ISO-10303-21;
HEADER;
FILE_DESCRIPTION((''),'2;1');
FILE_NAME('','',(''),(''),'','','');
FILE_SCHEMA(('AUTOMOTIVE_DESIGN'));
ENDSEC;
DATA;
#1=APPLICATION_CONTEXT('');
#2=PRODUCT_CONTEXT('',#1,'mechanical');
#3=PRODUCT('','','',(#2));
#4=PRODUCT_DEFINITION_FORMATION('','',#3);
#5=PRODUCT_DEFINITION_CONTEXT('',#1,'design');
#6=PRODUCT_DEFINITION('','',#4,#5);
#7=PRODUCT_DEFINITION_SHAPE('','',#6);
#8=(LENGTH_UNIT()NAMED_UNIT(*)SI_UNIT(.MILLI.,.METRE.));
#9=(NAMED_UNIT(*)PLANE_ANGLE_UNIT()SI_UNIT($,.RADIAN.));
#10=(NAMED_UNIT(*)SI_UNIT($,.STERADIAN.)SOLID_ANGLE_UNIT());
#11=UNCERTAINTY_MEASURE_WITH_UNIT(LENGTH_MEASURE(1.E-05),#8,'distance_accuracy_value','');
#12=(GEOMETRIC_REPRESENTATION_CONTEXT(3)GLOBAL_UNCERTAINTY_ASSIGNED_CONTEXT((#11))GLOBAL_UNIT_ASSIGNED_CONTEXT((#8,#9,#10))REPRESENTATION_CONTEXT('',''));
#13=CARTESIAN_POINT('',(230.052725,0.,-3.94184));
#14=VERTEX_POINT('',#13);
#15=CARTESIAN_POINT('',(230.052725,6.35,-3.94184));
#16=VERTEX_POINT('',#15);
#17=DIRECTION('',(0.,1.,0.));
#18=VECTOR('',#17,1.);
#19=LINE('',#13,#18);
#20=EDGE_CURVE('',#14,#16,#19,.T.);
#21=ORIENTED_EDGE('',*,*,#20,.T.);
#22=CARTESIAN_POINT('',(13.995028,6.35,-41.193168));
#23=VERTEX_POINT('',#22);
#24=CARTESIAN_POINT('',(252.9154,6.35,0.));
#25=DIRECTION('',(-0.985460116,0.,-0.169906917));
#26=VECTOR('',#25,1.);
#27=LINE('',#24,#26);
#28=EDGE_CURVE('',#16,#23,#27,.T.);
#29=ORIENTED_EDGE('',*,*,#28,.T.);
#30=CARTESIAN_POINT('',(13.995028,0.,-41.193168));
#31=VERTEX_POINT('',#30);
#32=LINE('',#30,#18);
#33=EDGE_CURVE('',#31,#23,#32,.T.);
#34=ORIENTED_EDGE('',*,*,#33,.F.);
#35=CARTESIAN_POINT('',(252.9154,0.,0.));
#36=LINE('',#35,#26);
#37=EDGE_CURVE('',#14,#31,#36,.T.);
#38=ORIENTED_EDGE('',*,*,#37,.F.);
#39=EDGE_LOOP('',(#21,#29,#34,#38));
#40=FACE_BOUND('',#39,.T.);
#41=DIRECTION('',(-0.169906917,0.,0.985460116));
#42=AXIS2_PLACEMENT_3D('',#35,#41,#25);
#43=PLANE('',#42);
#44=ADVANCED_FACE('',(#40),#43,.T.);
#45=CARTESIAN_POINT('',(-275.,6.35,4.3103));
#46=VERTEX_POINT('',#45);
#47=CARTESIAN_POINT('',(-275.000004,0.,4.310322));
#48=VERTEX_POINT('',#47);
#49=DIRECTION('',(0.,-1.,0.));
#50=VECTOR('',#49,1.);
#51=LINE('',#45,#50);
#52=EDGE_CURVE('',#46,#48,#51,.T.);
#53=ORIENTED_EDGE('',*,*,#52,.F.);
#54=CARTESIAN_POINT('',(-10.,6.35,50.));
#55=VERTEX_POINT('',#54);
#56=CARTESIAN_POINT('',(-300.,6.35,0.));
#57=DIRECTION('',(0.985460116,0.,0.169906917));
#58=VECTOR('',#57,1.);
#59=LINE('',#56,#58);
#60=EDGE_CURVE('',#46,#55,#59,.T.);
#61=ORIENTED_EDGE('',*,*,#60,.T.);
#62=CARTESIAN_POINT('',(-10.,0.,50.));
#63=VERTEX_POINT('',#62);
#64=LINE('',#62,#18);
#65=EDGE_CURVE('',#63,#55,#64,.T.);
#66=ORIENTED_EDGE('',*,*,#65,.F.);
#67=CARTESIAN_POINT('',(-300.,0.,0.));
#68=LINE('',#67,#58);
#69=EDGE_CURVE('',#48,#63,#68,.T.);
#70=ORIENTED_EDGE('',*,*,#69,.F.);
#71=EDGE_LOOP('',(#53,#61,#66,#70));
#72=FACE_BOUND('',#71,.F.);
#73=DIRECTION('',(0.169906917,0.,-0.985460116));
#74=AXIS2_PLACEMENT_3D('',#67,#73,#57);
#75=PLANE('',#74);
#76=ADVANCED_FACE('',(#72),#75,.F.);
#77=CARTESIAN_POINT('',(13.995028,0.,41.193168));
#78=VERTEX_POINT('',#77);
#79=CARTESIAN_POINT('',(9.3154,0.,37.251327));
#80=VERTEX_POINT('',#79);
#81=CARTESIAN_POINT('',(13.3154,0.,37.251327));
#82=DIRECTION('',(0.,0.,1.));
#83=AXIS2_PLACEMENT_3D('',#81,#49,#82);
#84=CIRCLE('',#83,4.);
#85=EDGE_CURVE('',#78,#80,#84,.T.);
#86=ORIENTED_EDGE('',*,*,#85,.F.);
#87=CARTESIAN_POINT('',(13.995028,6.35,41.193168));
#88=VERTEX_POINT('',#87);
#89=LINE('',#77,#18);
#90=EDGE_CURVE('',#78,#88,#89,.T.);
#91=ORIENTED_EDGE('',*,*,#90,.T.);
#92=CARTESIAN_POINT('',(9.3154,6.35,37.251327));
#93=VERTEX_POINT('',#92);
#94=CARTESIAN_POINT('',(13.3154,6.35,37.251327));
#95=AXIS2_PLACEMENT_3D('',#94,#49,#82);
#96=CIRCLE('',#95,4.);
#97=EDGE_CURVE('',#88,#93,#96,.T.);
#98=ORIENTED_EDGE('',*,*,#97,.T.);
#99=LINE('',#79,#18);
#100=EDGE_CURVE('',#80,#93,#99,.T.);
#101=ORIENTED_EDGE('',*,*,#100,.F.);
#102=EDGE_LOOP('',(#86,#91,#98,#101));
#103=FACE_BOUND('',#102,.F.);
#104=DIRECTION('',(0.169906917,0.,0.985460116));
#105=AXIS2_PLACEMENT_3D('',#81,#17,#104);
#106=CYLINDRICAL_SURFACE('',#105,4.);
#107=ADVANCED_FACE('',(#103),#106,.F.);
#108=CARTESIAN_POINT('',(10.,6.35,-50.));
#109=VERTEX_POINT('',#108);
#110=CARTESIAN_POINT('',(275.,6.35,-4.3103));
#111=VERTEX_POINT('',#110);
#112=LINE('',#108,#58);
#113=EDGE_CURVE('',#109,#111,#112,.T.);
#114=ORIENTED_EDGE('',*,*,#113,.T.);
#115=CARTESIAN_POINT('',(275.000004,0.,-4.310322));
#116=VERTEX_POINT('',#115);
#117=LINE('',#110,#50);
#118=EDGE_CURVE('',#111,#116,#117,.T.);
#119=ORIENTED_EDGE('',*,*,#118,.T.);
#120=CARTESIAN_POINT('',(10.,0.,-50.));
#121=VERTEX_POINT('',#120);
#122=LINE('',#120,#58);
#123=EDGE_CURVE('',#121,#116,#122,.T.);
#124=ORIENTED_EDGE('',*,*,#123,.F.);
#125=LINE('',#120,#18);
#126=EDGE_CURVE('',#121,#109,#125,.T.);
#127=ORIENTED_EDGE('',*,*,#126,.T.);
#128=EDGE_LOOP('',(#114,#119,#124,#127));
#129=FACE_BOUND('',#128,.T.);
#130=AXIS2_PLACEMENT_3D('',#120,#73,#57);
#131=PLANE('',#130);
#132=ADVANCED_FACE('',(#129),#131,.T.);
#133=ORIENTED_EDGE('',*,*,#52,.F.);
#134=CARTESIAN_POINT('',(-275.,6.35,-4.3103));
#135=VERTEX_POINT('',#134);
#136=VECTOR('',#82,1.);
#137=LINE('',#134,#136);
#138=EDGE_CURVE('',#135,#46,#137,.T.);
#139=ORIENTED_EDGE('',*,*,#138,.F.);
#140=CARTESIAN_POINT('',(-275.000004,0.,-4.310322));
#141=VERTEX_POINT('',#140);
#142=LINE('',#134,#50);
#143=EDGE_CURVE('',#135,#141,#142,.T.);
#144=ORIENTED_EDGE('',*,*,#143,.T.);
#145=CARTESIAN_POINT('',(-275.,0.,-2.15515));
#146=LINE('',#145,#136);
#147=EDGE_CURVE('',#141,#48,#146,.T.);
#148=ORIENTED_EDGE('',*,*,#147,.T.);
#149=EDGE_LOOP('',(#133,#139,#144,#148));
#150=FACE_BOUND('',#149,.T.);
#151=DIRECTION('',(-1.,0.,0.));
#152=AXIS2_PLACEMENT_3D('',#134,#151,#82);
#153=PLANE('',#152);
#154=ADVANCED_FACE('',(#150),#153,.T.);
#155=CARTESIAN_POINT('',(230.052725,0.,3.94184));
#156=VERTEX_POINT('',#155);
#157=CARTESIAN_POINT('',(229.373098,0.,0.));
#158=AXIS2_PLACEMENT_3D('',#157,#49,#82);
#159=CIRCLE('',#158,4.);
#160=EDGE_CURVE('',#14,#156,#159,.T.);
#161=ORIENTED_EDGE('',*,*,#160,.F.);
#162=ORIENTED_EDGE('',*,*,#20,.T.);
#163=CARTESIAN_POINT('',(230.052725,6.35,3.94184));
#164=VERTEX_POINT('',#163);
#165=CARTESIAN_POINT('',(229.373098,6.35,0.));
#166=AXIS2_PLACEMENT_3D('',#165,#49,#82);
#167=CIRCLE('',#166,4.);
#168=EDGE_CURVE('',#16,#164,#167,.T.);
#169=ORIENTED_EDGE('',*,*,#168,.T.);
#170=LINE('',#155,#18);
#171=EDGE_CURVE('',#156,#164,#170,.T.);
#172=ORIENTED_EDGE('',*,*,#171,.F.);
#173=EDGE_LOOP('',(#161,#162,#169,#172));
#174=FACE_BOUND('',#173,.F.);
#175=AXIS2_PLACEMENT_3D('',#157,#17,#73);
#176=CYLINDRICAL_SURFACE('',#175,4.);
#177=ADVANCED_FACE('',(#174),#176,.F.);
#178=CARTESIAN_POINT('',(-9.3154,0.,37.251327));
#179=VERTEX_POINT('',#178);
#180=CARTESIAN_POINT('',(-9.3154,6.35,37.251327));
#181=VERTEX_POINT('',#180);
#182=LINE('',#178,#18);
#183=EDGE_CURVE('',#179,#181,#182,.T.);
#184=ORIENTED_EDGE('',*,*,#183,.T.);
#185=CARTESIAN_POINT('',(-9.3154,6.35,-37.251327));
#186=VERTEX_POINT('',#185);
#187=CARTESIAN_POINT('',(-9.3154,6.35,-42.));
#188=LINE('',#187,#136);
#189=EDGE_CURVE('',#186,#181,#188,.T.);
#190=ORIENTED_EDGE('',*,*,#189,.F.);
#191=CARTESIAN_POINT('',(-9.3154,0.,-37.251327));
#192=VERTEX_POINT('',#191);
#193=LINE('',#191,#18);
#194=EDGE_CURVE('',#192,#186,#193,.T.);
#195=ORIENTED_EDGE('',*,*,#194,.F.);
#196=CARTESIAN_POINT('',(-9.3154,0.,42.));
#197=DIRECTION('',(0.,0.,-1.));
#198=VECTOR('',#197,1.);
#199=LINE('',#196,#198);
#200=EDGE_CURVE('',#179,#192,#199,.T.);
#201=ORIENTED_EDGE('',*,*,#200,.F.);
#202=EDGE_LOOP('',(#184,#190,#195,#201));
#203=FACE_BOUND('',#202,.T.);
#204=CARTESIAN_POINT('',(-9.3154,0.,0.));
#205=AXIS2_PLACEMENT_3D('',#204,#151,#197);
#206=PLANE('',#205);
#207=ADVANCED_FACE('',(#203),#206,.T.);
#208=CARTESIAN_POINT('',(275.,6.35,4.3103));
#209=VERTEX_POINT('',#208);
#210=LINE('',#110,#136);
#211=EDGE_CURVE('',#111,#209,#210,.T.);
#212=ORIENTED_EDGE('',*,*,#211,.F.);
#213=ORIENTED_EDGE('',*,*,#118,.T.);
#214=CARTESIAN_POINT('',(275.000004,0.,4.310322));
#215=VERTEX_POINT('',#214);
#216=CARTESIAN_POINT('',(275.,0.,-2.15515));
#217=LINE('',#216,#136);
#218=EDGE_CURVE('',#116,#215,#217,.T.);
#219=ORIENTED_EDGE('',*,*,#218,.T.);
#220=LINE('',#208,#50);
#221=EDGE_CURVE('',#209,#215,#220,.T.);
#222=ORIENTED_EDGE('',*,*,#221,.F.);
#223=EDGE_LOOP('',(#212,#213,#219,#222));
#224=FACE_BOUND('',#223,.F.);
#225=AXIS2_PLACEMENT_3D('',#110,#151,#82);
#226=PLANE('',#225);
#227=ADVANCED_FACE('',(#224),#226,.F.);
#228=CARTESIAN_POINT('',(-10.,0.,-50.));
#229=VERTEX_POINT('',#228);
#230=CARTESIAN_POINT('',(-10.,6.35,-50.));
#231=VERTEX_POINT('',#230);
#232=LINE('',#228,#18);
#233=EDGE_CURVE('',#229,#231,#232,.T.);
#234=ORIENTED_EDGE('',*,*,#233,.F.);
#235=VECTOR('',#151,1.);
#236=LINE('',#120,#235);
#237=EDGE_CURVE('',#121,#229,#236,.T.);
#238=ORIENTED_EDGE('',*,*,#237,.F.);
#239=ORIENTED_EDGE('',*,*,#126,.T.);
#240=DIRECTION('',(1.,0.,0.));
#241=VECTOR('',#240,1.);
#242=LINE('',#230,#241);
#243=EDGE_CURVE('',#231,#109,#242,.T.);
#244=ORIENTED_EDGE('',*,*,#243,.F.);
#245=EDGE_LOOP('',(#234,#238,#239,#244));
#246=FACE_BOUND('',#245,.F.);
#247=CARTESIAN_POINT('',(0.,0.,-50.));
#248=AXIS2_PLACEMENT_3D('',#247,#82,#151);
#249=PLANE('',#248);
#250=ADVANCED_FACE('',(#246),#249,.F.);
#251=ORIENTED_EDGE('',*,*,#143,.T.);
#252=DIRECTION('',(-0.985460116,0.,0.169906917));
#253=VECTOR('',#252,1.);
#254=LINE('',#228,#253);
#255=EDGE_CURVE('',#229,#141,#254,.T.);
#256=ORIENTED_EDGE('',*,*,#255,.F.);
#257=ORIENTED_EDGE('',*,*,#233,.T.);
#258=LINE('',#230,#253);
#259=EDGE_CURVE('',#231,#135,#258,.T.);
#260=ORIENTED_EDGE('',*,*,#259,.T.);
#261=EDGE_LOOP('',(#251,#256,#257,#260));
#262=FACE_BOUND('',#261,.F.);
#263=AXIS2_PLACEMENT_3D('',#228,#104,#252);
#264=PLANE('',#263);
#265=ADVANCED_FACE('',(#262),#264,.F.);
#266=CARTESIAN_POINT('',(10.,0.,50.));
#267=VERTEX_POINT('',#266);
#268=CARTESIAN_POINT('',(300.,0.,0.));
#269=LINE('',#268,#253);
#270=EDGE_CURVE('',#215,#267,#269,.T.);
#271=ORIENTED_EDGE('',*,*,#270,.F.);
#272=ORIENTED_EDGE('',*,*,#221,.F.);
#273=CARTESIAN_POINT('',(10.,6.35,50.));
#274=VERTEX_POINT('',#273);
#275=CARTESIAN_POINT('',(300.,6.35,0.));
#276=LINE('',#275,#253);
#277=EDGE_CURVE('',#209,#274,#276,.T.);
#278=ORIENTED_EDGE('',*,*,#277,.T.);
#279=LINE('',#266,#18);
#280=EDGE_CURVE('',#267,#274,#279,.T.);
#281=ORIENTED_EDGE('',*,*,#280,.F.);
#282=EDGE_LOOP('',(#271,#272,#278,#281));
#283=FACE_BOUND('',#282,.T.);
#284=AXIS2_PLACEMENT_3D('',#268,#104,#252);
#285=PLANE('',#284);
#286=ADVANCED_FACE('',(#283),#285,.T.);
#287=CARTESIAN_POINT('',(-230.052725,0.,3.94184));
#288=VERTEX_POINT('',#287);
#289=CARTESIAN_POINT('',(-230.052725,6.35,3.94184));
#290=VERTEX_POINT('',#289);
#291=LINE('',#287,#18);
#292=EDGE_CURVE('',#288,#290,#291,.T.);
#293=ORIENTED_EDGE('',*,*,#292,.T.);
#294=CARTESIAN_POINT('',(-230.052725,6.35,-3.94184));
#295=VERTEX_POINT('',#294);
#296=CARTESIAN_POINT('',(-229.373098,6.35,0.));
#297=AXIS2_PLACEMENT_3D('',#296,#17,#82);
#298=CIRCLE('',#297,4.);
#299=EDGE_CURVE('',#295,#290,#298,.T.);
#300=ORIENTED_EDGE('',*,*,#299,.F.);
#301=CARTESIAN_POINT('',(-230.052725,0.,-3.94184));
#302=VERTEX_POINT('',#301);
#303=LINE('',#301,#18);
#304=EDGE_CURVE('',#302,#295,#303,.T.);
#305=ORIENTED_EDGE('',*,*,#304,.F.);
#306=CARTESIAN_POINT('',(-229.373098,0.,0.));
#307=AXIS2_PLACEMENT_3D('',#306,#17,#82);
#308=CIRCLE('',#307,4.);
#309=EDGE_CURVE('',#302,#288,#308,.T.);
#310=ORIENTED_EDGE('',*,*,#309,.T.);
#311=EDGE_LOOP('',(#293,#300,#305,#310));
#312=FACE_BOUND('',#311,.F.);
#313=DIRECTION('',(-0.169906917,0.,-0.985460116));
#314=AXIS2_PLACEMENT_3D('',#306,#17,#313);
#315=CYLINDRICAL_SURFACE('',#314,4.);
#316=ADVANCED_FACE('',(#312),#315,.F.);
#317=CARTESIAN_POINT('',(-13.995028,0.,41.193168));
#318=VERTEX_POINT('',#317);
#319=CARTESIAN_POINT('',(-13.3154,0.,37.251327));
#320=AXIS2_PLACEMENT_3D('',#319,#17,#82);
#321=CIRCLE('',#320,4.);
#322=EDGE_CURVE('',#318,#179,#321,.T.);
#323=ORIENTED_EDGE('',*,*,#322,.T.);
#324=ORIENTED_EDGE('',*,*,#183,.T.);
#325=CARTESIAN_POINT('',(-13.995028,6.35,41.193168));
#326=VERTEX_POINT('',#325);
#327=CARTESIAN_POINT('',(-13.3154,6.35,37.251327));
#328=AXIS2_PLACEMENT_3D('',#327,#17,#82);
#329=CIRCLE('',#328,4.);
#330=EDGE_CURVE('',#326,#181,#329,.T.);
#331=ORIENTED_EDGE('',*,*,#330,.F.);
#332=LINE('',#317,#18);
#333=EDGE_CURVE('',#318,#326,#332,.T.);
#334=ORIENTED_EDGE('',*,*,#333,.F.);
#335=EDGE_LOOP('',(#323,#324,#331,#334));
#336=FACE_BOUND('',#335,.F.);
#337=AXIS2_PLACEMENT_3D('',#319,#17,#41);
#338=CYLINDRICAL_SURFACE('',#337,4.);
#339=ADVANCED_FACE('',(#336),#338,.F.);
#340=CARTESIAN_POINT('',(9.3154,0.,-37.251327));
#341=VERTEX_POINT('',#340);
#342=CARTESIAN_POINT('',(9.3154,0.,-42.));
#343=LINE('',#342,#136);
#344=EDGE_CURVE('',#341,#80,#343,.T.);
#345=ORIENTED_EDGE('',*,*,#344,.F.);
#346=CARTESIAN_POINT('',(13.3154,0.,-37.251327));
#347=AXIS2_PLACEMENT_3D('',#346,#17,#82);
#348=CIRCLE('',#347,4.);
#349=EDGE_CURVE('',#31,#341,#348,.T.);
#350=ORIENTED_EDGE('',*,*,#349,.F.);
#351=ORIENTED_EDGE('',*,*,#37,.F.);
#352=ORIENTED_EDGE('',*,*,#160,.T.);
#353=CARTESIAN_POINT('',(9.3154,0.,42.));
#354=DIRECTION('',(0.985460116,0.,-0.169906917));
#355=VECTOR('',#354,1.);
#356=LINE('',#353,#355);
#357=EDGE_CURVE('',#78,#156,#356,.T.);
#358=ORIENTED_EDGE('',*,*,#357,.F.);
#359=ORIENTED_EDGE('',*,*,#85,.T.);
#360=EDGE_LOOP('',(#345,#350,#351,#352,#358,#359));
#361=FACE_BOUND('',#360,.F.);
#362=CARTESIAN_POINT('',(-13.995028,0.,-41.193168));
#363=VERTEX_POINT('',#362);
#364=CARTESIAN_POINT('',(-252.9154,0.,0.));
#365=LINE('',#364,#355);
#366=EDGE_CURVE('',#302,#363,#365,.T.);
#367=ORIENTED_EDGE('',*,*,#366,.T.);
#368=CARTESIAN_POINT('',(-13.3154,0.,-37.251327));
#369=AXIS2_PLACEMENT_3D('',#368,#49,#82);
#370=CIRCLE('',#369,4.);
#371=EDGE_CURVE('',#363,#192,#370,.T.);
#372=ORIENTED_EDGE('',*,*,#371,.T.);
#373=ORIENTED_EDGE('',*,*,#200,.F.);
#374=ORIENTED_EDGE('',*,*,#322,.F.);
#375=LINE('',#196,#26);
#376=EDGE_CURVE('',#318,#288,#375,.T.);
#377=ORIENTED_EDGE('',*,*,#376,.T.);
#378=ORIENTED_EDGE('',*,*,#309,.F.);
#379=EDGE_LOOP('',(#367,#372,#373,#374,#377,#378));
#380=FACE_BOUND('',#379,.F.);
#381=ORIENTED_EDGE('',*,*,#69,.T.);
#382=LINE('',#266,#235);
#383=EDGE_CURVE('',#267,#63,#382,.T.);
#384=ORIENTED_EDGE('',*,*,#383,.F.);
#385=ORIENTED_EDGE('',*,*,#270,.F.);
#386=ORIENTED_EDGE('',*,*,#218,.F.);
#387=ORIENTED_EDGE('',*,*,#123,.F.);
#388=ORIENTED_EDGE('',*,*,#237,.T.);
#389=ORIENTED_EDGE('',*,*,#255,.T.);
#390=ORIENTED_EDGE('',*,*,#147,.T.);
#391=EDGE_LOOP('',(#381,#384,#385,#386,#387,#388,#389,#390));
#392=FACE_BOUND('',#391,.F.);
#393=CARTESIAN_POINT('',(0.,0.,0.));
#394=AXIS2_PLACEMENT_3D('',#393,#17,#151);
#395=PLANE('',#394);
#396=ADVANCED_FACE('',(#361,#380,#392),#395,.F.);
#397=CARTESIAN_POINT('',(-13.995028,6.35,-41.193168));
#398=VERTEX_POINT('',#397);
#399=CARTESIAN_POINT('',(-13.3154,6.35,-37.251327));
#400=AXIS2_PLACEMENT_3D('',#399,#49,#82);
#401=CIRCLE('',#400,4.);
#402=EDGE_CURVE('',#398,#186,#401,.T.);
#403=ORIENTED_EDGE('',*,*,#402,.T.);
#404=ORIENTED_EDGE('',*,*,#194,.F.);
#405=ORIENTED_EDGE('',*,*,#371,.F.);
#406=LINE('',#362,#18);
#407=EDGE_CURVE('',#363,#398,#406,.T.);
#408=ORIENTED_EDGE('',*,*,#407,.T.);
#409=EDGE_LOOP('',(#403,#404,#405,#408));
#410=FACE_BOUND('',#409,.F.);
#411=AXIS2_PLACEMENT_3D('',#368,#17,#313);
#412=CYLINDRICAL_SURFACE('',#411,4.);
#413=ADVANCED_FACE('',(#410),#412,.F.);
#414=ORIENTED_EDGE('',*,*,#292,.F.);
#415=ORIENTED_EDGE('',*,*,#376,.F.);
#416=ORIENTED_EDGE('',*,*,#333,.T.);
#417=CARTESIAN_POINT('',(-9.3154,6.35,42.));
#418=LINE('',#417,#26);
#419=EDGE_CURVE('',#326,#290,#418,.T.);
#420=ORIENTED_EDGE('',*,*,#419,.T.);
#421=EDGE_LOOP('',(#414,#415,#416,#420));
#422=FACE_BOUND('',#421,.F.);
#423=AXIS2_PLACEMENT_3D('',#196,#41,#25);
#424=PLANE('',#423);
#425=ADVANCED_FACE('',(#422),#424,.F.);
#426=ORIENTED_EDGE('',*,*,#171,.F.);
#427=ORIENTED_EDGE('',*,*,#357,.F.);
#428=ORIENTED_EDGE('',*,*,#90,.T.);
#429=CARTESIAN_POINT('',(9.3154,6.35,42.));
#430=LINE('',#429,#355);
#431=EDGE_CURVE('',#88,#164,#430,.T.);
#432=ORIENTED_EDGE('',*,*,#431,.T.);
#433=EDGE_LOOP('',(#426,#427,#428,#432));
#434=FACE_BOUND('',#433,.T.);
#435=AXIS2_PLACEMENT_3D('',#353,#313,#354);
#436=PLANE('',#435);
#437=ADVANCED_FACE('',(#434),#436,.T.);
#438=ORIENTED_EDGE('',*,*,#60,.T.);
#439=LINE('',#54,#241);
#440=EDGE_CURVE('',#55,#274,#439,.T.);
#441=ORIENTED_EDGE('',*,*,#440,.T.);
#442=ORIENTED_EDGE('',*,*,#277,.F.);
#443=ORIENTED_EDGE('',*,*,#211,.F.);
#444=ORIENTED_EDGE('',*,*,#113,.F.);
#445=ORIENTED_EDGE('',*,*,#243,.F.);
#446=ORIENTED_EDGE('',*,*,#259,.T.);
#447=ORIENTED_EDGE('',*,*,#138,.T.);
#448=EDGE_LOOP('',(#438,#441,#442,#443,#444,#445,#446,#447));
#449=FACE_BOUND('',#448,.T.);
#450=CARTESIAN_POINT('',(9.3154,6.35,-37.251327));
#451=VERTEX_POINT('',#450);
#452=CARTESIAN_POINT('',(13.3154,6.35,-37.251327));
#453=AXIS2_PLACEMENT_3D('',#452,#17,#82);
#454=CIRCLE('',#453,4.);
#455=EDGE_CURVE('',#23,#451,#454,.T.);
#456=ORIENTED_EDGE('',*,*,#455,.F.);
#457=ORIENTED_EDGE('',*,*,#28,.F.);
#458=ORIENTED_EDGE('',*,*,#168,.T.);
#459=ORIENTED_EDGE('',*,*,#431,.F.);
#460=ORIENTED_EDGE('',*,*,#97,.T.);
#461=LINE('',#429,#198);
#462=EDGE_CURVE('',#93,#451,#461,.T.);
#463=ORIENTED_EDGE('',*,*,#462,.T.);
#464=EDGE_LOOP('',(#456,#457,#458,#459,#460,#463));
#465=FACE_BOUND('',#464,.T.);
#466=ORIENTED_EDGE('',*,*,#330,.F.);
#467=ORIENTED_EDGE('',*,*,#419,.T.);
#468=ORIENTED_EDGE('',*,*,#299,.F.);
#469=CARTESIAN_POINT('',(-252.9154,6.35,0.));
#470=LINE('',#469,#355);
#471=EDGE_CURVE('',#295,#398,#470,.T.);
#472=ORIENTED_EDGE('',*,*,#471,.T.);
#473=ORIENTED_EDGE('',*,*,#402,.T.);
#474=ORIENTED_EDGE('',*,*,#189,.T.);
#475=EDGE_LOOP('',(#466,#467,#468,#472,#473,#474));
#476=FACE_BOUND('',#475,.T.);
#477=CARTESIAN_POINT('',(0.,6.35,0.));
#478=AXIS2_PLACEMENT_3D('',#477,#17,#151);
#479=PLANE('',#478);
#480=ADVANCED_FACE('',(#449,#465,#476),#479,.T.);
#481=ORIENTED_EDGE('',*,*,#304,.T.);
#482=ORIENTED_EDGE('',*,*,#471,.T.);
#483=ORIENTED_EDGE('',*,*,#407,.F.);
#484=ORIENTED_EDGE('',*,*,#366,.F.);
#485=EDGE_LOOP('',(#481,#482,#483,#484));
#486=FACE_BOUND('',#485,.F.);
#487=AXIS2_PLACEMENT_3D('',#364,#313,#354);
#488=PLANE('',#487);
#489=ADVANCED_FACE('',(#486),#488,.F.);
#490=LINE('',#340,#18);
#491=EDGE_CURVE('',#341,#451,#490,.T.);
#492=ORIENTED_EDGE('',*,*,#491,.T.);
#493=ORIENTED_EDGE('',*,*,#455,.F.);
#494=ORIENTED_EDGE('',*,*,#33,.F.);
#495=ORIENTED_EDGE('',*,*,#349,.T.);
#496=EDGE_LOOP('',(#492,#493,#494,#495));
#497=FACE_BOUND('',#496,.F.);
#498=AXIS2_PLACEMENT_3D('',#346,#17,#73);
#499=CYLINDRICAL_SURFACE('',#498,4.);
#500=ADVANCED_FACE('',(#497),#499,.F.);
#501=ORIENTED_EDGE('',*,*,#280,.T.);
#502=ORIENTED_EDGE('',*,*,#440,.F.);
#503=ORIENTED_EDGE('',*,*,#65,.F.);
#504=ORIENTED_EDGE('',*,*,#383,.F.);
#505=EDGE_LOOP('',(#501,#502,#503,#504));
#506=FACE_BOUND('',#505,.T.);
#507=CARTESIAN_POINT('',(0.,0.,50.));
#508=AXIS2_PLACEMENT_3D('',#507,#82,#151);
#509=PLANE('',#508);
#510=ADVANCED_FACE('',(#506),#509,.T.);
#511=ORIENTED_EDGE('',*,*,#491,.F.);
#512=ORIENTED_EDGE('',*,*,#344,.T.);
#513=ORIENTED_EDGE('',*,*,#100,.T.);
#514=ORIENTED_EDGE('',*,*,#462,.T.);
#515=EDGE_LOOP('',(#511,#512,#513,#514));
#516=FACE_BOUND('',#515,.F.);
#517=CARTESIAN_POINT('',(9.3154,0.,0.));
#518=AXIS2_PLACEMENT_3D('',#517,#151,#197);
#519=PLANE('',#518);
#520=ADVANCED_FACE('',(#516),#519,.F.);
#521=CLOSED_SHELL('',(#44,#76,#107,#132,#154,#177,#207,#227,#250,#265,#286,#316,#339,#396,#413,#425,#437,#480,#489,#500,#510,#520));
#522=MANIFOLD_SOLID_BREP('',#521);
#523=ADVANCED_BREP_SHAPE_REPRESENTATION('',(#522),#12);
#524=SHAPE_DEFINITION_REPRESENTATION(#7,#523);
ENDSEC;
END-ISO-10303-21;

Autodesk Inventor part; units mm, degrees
ref_plane "YZ Plane" through (0, 0, 0) normal (1, 0, 0) x (0, 1, 0)
ref_plane "XZ Plane" through (0, 0, 0) normal (0, 1, 0) x (-1, 0, 0)
ref_plane "XY Plane" through (0, 0, 0) normal (0, 0, 1) x (1, 0, 0)
sketch "Sketch1" plane through (0, 0, 0) normal (0, 1, 0) x (-1, 0, 0)
  line L0 (420, 0) -> (-420, 0) projected
  line L1 (0, 50) -> (-10, 50)
  line L2 (0, -50) -> (-10, -50)
  line L3 (-10, -50) -> (-300, 0)
  line L4 (-300, 0) -> (-10, 50)
  line L5 (0, 50) -> (0, -50)
  line L6 (0, 50) -> (10, 50)
  line L7 (0, -50) -> (10, -50)
  line L8 (10, -50) -> (300, 0)
  line L9 (300, 0) -> (10, 50)
  line L10 (-300, 0) -> (300, 0)
  line L11 (0, -70) -> (0, 70) projected
  line L12 (-300, 0) -> (-300, 0)
  line L13 (300, 0) -> (300, 0)
  line L14 (0, 42) -> (9.3154, 42)
  line L15 (9.3154, 42) -> (252.9154, 0)
  line L16 (252.9154, 0) -> (9.3154, -42)
  line L17 (9.3154, -42) -> (0, -42)
  line L18 (0, 42) -> (-9.3154, 42)
  line L19 (-9.3154, 42) -> (-252.9154, 0)
  line L20 (-252.9154, 0) -> (-9.3154, -42)
  line L21 (-9.3154, -42) -> (0, -42)
  line L22 (9.3154, 42) -> (9.3154, -42)
  line L23 (-9.3154, 42) -> (-9.3154, -42)
  point P0 (0, 0)
  point P1 (300, 0)
  point P2 (-300, 0)
  dimension "d36" = 600
  dimension "d38" = 10
  dimension "d39" = 100
  dimension "d44" = 8
  dimension "d45" = 8
  dimension "d47" = 600
  dimension "d49" = 300
  dimension "d51" = 0
  dimension "d52" = 300
  dimension "d53" = 300
  dimension "d54" = 0
  dimension "d55" = 0
  dimension "d56" = 0
  dimension "d57" = 0
  dimension "d60" = 0
extrude "Main_block" add sketch "Sketch1" along normal blind 6.35 contours L8 L7 L5 L17 L16 L0 | L0 L15 L14 L5 L6 L9 | L22 L17 L5 L0 | L0 L5 L14 L22 | L2 L3 L0 L20 L21 L5 | L5 L18 L19 L0 L4 L1 | L5 L21 L23 L0 | L0 L23 L18 L5
fillet "Fillet7" radius 4 6 edges at (-9.3154, 3.175, -42) (9.3154, 3.175, -42) (9.3154, 3.175, 42) (-9.3154, 3.175, 42) (252.9154, 3.175, 0) (-252.9154, 3.175, 0)
sketch "Sketch4" plane through (0, 6.35, 0) normal (0, 1, 0) x (1, 0, 0)
  line L0 (-300, 0) -> (-10, -50) projected
  line L1 (-10, 50) -> (-300, 0) projected
  line L2 (-275, 4.3103) -> (-275, -4.3103)
  line L3 (-275, -4.3103) -> (-300, 0)
  line L4 (-300, 0) -> (-275, 4.3103)
  line L5 (0, 70) -> (0, -70) projected
  line L6 (275, 4.3103) -> (275, -4.3103)
  line L7 (275, -4.3103) -> (300, 0)
  line L8 (300, 0) -> (275, 4.3103)
  point P0 (0, 0)
extrude "Extrusion4" cut sketch "Sketch4" against normal blind 10
properties part number "Main Support"
